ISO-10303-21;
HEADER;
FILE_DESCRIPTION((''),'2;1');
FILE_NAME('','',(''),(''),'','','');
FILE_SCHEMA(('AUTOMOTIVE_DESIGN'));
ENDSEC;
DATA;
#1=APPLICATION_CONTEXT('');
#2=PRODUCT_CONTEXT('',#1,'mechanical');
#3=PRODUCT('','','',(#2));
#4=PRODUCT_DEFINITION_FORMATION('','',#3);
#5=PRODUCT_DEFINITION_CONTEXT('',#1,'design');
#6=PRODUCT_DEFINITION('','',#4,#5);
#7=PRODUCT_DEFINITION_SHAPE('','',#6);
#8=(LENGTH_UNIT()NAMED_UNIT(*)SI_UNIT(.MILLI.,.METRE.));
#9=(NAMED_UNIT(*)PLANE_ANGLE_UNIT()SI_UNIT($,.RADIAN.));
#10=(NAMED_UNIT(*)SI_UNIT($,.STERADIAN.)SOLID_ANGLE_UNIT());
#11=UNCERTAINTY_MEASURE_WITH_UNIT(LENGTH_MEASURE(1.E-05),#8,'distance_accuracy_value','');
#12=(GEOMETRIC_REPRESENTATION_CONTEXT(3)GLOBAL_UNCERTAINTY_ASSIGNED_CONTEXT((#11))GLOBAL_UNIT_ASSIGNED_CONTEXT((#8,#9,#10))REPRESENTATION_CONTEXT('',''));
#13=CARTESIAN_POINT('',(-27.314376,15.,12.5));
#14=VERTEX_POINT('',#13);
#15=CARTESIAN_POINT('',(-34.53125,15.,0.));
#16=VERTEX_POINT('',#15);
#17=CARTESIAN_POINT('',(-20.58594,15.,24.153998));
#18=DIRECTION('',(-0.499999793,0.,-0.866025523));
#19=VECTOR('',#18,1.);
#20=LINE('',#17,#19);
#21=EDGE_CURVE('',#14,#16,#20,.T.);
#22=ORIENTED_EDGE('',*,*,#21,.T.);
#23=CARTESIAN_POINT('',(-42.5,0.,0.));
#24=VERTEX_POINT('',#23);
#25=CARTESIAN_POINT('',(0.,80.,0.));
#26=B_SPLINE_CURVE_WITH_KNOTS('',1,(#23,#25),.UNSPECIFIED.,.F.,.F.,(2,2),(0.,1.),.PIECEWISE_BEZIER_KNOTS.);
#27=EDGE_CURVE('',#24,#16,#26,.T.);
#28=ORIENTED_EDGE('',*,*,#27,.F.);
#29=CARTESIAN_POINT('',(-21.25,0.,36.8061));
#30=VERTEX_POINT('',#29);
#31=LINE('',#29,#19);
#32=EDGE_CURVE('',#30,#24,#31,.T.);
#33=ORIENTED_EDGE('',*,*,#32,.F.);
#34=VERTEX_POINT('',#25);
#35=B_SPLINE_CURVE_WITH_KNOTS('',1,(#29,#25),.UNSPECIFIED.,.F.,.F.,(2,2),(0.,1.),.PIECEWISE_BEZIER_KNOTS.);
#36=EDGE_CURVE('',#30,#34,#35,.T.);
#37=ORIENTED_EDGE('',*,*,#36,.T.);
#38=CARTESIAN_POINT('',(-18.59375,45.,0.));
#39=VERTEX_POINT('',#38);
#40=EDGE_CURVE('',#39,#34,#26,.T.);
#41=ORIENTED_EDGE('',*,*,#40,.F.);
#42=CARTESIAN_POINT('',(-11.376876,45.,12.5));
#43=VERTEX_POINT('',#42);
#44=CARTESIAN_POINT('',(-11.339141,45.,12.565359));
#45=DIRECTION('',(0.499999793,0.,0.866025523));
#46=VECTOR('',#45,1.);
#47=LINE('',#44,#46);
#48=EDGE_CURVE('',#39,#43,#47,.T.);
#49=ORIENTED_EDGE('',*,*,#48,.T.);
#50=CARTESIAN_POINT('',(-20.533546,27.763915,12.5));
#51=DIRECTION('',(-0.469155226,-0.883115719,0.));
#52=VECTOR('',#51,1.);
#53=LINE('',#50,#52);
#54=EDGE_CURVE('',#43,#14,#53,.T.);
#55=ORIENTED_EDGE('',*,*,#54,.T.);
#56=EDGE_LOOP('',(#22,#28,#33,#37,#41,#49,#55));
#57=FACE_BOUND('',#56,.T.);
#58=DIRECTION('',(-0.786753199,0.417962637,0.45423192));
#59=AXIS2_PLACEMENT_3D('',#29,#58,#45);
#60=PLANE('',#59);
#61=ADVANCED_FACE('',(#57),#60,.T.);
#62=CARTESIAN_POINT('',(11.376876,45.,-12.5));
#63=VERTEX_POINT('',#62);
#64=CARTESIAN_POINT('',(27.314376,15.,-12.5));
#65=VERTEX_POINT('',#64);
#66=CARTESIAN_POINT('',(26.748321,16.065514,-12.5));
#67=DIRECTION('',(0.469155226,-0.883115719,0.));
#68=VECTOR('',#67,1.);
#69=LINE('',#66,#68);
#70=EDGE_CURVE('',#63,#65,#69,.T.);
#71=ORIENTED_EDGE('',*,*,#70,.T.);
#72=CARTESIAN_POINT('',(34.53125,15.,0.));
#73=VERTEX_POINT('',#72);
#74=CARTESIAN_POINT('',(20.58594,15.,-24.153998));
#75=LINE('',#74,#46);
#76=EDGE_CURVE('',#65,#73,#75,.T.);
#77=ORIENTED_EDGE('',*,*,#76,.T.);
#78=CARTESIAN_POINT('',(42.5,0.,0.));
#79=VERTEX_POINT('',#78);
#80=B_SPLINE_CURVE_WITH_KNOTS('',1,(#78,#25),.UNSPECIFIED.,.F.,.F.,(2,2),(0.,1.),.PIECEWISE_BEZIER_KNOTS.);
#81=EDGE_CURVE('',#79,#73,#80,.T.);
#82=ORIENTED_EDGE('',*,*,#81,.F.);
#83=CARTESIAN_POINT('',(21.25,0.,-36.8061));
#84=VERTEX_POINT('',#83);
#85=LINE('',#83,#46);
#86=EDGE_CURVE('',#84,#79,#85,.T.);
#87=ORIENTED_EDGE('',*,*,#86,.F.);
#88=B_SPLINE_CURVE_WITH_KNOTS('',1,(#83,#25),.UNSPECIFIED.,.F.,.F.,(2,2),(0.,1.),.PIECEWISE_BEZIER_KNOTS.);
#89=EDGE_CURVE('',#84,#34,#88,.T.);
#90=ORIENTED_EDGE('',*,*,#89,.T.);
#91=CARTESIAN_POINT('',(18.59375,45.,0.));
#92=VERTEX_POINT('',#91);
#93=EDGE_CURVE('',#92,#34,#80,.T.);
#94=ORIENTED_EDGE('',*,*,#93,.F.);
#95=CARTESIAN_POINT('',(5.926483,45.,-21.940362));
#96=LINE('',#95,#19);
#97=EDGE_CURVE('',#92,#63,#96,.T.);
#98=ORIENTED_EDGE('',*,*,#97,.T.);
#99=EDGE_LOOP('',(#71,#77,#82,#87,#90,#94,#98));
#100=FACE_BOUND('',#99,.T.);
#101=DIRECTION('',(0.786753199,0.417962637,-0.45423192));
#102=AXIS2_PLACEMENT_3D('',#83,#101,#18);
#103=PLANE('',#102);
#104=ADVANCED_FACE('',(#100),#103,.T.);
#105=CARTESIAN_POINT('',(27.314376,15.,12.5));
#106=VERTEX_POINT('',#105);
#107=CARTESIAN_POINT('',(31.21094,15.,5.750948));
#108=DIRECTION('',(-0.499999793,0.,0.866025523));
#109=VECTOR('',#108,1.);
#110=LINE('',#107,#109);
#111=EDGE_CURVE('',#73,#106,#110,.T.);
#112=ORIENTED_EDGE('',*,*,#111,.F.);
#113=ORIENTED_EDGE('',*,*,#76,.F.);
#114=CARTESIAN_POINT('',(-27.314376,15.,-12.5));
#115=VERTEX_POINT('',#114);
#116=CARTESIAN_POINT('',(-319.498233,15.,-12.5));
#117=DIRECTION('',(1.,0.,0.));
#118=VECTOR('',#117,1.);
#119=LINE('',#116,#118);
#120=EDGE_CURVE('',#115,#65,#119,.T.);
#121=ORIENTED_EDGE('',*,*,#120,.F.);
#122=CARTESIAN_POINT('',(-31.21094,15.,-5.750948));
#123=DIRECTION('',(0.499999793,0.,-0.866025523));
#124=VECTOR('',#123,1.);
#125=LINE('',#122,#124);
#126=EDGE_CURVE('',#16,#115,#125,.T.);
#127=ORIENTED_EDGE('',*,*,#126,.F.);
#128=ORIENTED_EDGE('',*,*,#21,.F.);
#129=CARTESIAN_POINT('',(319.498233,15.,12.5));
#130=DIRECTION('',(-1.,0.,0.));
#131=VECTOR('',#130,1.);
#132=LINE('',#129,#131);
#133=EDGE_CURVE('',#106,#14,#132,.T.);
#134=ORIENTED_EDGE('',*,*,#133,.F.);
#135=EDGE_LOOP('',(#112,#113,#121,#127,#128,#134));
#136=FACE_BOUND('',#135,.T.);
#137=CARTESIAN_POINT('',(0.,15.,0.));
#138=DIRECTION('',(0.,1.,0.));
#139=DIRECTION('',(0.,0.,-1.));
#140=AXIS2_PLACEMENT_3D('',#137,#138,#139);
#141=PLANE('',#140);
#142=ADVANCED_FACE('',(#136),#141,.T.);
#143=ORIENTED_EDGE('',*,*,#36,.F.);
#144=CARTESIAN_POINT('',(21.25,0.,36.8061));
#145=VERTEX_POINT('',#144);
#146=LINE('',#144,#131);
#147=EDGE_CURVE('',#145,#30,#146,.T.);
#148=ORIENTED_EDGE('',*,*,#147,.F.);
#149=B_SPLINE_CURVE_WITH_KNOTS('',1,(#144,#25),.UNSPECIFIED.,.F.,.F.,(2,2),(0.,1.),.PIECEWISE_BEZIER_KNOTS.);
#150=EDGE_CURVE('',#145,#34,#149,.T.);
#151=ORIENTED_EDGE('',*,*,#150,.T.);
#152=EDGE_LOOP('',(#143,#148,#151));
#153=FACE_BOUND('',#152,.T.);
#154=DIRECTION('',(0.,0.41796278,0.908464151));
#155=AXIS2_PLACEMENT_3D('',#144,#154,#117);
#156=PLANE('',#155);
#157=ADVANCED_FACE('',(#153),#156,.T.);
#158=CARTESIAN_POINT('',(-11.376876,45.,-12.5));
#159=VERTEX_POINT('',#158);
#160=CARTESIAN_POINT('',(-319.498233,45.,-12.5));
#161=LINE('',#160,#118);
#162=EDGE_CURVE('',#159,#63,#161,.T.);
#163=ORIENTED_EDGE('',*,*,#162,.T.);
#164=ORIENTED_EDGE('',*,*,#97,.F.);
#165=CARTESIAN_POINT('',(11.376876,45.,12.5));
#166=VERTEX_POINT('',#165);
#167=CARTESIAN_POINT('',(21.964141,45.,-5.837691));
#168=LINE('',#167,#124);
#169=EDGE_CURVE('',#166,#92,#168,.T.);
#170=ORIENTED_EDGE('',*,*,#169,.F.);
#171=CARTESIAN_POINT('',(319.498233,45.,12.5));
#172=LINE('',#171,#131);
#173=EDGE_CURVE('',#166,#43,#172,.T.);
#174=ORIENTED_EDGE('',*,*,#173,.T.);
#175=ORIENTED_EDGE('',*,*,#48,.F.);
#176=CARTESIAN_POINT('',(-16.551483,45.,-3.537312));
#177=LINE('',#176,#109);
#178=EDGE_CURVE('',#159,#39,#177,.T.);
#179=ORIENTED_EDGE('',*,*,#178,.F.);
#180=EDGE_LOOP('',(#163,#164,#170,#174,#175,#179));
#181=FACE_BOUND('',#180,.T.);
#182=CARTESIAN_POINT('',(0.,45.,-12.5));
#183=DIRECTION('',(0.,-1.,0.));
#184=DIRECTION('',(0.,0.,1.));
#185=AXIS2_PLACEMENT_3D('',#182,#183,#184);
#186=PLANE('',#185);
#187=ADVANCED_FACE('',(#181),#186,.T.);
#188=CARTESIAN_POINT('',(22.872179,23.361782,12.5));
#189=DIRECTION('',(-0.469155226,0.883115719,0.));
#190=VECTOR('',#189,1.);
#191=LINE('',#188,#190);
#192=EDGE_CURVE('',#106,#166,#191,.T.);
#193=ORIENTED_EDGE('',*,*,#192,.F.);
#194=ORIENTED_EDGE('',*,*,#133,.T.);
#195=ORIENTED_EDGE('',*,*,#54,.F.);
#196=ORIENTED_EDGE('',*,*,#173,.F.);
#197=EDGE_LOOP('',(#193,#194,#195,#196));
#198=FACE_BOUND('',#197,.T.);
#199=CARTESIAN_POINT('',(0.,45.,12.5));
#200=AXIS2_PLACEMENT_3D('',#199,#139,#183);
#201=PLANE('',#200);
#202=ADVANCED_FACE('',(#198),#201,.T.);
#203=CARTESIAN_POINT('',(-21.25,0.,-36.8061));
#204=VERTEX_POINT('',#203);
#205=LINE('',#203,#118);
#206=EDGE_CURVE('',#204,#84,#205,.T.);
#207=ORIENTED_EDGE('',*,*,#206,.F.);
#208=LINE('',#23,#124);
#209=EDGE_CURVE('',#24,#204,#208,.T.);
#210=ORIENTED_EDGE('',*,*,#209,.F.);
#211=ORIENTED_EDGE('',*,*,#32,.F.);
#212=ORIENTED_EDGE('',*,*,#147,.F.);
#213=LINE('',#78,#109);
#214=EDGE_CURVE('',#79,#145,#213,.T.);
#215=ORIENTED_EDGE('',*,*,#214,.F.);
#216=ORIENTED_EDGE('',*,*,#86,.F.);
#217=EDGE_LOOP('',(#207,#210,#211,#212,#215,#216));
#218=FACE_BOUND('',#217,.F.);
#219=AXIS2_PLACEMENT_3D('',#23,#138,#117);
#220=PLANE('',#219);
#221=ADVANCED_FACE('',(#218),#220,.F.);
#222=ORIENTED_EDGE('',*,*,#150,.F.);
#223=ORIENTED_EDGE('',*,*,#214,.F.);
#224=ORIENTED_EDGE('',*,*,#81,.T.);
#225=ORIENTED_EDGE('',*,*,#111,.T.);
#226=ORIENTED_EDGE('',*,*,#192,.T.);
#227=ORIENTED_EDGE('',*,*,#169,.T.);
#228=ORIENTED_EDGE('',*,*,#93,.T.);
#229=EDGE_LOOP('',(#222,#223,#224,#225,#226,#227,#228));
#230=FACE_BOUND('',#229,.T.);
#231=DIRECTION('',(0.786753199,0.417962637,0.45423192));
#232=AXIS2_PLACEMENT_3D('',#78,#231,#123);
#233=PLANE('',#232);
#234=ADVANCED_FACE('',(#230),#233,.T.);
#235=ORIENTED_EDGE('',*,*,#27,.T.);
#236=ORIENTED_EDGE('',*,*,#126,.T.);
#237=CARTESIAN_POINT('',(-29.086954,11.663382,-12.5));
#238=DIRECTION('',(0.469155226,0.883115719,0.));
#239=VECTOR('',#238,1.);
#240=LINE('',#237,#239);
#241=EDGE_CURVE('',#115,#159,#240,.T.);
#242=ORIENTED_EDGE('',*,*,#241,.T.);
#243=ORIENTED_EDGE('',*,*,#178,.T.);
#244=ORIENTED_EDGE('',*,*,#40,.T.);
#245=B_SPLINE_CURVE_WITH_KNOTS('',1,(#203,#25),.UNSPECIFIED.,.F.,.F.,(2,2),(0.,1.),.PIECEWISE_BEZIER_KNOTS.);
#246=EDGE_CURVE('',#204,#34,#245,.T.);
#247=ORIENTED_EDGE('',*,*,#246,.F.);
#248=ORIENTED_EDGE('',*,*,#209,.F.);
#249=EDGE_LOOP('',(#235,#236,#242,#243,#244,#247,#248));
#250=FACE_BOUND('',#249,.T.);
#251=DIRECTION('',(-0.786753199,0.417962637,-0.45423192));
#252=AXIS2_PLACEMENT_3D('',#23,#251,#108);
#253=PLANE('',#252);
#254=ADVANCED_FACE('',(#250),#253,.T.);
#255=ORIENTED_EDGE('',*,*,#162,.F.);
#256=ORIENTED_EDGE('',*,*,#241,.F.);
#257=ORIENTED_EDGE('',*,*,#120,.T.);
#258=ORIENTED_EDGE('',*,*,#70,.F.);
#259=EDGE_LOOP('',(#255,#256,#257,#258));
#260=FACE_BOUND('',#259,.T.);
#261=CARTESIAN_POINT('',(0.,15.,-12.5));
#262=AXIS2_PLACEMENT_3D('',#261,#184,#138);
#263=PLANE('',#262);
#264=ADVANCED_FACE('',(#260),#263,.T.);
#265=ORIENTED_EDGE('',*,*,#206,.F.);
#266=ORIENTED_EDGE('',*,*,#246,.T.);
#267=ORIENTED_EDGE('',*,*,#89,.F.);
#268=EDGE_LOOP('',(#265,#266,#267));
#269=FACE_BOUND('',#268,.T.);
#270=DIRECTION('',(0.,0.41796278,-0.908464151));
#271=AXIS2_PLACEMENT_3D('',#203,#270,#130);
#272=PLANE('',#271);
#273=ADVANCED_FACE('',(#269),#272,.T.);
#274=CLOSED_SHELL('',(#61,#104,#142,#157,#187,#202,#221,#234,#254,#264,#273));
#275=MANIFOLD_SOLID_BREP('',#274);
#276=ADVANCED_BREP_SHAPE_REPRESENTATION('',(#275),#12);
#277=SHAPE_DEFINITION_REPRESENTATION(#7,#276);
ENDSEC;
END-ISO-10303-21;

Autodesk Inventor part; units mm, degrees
ref_plane "YZ Plane" through (0, 0, 0) normal (1, 0, 0) x (0, 1, 0)
ref_plane "XZ Plane" through (0, 0, 0) normal (0, 1, 0) x (-1, 0, 0)
ref_plane "XY Plane" through (0, 0, 0) normal (0, 0, 1) x (1, 0, 0)
sketch "Эскиз1" plane through (0, 0, 0) normal (0, 1, 0) x (-1, 0, 0)
  line L0 (42.5, 0) -> (21.25, -36.8061)
  line L1 (21.25, -36.8061) -> (-21.25, -36.8061)
  line L2 (-21.25, -36.8061) -> (-42.5, 0)
  line L3 (-42.5, 0) -> (-21.25, 36.8061)
  line L4 (-21.25, 36.8061) -> (21.25, 36.8061)
  line L5 (21.25, 36.8061) -> (42.5, 0)
  point P0 (0, 0)
  point P1 (0, 0)
  dimension "d0" = 85
sketch "Эскиз2" plane through (0, 0, 0) normal (1, 0, 0) x (0, 1, 0)
  point P0 (0, 0)
  point P1 (80, 0)
  dimension "d1" = 80
loft "Лофт1" add profiles "Эскиз1" section 2 point at (0, 80, 0)
sketch "Эскиз3" plane through (0, 0, 0) normal (1, 0, 0) x (0, 1, 0)
  line L0 (15, -12.5) -> (45, -12.5)
  line L1 (45, -12.5) -> (45, 12.5)
  line L2 (45, 12.5) -> (15, 12.5)
  line L3 (15, 12.5) -> (15, -12.5)
  line L4 (0, 0) -> (80, 0) projected
  line L5 (15, -12.5) -> (45, 12.5) construction
  line L6 (45, -12.5) -> (15, 12.5) construction
  line L7 (0, 0) -> (0, 36.8061) projected
  point P0 (30, 0)
  dimension "d6" = 30
  dimension "d7" = 25
  dimension "d8" = 15
extrude "Выдавливание1" cut sketch "Эскиз3" along normal through all both and the other way through all
properties part number "Пирамида"
